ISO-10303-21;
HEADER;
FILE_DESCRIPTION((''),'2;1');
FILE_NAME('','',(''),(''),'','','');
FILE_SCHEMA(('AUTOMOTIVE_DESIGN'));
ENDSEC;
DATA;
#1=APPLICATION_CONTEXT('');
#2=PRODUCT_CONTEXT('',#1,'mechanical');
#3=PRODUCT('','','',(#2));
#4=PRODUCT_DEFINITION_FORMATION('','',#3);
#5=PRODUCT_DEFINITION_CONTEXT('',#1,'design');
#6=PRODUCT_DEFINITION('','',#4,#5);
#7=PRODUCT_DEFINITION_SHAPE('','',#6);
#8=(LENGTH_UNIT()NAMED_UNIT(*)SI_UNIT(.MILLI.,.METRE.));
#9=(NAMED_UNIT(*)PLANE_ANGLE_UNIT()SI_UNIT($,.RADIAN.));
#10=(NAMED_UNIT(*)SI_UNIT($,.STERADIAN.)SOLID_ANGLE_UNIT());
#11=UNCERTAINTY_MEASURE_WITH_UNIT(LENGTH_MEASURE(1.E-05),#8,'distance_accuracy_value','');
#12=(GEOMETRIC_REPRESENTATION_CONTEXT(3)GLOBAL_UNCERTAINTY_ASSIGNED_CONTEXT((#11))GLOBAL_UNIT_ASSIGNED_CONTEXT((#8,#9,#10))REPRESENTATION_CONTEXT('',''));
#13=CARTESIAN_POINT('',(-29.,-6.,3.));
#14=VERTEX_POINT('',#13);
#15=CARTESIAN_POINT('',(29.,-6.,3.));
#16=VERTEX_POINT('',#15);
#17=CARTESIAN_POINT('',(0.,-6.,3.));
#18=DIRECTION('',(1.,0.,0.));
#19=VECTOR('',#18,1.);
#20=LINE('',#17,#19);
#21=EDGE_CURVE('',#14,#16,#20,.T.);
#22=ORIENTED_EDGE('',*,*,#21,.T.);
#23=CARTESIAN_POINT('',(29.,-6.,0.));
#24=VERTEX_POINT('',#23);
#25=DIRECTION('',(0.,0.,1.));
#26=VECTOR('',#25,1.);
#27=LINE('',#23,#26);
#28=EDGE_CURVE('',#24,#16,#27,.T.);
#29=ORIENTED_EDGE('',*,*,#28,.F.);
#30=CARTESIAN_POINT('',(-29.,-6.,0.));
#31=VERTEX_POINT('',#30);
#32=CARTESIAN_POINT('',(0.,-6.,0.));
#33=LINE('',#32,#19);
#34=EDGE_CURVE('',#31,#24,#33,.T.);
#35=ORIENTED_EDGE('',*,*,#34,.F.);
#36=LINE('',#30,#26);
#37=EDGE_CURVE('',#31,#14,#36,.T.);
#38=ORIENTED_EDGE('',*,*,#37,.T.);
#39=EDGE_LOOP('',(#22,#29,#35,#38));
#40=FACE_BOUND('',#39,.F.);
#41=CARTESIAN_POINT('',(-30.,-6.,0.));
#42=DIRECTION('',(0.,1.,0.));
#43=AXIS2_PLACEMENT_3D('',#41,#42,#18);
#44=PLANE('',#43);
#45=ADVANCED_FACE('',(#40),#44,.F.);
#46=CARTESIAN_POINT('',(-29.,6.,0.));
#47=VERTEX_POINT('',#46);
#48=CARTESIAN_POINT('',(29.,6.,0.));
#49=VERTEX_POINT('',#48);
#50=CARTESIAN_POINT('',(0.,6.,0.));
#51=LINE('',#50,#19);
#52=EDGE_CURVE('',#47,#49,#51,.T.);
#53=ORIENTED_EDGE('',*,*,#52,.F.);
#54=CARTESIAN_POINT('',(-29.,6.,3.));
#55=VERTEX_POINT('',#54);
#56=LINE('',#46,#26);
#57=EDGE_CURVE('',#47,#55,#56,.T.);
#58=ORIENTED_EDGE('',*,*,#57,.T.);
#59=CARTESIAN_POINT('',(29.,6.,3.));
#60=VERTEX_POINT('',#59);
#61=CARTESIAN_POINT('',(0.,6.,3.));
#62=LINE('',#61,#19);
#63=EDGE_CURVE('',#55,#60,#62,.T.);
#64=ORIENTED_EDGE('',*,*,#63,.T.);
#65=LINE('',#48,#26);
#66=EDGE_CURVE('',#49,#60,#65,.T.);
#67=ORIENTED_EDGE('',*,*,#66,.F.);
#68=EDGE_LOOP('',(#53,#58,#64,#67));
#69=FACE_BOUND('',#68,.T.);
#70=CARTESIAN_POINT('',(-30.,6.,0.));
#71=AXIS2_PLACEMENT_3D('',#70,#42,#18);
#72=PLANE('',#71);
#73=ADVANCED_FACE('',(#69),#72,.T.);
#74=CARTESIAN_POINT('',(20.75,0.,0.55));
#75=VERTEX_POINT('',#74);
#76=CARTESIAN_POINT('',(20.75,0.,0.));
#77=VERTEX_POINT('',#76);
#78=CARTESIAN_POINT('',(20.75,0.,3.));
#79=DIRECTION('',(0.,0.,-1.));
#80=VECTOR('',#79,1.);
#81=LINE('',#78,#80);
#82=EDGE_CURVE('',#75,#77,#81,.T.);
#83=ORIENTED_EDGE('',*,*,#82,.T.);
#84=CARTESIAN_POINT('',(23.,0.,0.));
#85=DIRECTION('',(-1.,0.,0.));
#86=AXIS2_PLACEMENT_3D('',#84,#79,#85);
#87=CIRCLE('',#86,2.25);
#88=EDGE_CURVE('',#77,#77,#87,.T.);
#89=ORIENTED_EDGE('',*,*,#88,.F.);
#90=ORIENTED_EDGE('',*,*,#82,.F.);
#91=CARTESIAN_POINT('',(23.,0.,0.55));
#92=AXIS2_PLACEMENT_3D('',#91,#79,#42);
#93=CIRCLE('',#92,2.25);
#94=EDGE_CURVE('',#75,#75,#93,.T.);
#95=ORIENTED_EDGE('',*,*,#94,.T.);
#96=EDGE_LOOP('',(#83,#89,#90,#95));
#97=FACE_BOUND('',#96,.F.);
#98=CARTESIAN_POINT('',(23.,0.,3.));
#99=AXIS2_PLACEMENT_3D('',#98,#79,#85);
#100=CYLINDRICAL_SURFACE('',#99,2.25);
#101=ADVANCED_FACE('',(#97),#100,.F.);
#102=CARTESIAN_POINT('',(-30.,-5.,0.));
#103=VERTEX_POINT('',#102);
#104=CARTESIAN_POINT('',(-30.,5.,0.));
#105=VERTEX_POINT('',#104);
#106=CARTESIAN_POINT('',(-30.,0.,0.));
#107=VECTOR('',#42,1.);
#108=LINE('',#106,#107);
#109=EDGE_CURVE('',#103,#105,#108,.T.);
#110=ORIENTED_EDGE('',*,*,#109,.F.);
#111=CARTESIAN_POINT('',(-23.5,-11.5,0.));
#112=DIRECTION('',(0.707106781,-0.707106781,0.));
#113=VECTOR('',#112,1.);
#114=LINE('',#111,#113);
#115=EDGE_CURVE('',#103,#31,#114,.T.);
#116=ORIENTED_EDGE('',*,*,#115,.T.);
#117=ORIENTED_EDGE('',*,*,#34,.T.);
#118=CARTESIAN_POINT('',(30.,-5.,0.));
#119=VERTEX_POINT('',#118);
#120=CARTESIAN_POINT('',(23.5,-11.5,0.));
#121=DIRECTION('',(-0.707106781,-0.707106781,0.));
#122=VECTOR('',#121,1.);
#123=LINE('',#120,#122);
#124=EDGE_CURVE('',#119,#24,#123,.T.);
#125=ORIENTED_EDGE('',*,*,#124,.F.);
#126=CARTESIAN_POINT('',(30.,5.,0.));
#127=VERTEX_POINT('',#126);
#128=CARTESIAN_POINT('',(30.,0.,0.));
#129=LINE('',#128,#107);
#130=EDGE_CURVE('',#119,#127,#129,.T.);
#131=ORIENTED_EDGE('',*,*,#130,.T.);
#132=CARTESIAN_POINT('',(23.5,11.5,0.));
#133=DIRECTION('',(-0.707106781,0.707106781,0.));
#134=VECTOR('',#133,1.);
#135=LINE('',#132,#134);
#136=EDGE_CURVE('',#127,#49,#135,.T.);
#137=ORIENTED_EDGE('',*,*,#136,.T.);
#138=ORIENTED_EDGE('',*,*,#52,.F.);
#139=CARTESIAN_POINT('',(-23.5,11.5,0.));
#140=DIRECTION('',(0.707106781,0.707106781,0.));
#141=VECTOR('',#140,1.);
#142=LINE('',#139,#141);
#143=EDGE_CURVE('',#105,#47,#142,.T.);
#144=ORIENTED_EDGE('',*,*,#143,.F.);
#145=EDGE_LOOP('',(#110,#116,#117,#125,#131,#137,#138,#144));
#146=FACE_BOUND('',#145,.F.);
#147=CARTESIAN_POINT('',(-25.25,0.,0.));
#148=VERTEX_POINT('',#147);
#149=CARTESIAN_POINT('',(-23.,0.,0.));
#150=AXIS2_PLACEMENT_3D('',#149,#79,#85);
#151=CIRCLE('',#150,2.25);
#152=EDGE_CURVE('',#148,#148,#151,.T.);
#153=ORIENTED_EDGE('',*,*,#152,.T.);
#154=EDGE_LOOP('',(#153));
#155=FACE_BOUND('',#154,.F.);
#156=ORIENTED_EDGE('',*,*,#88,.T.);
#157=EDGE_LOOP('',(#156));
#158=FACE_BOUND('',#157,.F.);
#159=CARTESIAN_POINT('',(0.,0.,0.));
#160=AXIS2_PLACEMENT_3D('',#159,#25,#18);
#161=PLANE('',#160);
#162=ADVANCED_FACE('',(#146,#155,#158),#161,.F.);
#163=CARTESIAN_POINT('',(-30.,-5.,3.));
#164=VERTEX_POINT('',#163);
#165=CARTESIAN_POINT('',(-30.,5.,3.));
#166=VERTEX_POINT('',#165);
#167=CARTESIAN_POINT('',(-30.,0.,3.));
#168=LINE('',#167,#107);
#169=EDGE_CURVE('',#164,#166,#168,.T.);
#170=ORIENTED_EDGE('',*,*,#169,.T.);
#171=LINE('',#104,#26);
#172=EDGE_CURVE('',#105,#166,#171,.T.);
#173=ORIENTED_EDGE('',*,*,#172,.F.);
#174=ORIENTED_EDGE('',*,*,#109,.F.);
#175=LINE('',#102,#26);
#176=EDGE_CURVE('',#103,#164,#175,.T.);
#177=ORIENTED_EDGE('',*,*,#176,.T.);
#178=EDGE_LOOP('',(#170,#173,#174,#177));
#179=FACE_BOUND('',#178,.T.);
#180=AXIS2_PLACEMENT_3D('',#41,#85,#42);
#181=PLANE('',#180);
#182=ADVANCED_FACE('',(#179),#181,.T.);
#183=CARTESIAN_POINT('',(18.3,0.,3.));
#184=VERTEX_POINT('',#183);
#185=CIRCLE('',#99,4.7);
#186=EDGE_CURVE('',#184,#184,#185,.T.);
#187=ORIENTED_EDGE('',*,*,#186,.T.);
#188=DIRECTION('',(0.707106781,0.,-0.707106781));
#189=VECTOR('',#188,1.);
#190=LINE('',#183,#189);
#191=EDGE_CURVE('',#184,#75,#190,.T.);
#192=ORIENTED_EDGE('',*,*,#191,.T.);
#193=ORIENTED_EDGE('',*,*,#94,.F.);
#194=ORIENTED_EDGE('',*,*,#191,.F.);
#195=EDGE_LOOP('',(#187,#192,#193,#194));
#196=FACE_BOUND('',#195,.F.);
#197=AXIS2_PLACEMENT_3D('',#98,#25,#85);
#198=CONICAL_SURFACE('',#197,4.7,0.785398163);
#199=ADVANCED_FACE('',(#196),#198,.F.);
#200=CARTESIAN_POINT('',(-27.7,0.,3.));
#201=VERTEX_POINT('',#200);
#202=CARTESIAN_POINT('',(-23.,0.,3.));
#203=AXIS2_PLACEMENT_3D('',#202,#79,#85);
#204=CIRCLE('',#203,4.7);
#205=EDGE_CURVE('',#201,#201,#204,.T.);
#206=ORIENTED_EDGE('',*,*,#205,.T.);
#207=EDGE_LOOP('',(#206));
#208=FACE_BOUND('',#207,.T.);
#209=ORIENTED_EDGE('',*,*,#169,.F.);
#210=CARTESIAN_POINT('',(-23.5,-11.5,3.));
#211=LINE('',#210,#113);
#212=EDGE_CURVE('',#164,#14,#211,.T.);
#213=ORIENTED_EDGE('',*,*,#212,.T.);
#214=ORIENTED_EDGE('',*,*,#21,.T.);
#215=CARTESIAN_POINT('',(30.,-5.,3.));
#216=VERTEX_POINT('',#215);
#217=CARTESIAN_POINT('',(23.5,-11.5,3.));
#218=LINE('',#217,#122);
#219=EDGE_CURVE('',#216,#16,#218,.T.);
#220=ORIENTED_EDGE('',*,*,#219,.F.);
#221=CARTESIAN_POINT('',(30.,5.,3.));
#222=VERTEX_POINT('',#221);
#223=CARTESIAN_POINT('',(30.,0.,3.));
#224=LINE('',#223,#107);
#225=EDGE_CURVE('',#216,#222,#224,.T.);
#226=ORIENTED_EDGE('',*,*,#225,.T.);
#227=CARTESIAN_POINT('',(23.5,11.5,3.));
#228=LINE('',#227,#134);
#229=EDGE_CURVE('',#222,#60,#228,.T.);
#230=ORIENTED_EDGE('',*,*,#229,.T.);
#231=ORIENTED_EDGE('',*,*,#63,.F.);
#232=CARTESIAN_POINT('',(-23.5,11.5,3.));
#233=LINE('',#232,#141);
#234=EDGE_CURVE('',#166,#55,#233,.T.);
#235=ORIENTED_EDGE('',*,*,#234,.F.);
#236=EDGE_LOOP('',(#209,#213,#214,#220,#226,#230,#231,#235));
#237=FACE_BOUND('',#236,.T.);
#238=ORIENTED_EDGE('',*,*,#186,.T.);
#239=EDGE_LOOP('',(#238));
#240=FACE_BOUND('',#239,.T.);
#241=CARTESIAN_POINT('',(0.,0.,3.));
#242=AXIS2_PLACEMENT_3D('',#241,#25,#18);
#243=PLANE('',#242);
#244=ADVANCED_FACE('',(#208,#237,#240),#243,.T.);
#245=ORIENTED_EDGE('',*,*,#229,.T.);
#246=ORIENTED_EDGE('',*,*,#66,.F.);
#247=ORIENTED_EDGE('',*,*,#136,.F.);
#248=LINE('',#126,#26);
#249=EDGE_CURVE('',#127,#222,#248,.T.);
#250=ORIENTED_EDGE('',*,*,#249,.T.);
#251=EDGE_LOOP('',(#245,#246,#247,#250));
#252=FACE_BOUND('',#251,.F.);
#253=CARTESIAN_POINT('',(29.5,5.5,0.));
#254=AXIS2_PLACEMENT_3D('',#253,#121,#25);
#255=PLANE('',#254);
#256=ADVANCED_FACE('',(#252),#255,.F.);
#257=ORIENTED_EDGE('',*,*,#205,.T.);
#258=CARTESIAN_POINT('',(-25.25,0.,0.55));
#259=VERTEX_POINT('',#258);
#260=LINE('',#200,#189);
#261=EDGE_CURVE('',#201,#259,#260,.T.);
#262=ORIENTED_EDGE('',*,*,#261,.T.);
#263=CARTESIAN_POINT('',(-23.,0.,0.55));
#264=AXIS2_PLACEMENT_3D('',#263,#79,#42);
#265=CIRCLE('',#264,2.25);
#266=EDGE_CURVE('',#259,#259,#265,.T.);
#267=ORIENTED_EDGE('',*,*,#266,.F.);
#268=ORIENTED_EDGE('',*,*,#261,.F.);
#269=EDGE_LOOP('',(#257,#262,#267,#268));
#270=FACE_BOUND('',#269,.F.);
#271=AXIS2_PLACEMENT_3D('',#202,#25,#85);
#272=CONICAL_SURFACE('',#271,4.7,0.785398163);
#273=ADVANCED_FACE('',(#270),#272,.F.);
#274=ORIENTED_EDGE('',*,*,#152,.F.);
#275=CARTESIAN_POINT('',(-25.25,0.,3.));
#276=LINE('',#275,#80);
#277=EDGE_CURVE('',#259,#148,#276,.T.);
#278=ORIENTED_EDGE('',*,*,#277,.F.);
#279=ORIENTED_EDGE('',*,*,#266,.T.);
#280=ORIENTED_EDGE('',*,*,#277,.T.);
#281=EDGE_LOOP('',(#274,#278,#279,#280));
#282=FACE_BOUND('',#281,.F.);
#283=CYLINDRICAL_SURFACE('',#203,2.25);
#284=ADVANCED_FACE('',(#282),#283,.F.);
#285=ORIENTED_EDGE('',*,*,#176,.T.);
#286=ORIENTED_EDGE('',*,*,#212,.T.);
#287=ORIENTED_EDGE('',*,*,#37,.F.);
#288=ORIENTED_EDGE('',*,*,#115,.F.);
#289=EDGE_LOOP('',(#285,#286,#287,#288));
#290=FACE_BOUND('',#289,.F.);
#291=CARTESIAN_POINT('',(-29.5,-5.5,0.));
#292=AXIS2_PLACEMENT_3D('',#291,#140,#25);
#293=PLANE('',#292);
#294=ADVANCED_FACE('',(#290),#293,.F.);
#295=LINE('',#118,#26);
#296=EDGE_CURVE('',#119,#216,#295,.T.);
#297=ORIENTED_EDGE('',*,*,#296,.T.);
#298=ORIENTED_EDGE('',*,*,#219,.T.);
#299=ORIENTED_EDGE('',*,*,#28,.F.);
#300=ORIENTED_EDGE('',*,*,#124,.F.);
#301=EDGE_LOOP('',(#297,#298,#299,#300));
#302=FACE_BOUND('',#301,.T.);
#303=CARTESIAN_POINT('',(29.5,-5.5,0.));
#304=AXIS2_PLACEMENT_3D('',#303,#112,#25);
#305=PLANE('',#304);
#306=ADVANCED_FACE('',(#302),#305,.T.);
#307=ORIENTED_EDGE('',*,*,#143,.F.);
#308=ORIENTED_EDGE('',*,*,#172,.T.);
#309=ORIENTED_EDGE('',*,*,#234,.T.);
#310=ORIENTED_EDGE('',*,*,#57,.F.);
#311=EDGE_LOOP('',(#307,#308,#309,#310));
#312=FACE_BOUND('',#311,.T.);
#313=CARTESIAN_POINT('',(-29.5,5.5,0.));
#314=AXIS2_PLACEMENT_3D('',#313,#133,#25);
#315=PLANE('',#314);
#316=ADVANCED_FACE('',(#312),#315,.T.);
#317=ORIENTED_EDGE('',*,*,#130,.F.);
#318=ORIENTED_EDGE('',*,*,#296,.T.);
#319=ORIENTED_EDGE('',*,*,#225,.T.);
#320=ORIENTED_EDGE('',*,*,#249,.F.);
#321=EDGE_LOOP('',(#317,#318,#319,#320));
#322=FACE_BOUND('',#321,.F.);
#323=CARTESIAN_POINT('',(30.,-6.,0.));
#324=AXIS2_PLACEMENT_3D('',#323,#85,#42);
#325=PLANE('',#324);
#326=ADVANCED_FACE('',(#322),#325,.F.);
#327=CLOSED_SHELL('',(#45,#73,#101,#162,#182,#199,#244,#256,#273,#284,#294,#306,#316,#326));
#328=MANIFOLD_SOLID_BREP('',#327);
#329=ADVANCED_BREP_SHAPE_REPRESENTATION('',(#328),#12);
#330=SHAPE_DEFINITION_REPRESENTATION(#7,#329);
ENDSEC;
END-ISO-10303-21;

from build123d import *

# Parameters (mm, degrees)
F0_W           = 60
F0_H           = 12
F1_DEPTH       = 3
F3_D           = 4.5
F3_DEPTH       = 3.4
F3_CSINK_D     = 9.4
F3_CSINK_ANGLE = 90
F3_TIP         = 1.3519363928
F4_SIZE        = 1


with BuildPart() as f1:
    # F0 (on Top) → F1 (new body)
    with BuildSketch(Plane.XY):
        Rectangle(F0_W, F0_H)
    extrude(amount=F1_DEPTH)

    # F3
    with Locations(Plane.XY.offset(3)):
        with Locations((-23, 0), (23, 0)):
            CounterSinkHole(F3_D / 2, F3_CSINK_D / 2, depth=F3_DEPTH, counter_sink_angle=F3_CSINK_ANGLE)
            with Locations((0, 0, -(F3_DEPTH + F3_TIP / 2))):  # 118° drill point
                Cone(0, F3_D / 2, F3_TIP, mode=Mode.SUBTRACT)

    # F4
    f4_edges = [f1.edges().sort_by_distance(p)[0] for p in [
        (30, 6, 1.5),
        (30, -6, 1.5),
        (-30, -6, 1.5),
        (-30, 6, 1.5),
    ]]
    chamfer(f4_edges, length=F4_SIZE)


solid = f1.part
